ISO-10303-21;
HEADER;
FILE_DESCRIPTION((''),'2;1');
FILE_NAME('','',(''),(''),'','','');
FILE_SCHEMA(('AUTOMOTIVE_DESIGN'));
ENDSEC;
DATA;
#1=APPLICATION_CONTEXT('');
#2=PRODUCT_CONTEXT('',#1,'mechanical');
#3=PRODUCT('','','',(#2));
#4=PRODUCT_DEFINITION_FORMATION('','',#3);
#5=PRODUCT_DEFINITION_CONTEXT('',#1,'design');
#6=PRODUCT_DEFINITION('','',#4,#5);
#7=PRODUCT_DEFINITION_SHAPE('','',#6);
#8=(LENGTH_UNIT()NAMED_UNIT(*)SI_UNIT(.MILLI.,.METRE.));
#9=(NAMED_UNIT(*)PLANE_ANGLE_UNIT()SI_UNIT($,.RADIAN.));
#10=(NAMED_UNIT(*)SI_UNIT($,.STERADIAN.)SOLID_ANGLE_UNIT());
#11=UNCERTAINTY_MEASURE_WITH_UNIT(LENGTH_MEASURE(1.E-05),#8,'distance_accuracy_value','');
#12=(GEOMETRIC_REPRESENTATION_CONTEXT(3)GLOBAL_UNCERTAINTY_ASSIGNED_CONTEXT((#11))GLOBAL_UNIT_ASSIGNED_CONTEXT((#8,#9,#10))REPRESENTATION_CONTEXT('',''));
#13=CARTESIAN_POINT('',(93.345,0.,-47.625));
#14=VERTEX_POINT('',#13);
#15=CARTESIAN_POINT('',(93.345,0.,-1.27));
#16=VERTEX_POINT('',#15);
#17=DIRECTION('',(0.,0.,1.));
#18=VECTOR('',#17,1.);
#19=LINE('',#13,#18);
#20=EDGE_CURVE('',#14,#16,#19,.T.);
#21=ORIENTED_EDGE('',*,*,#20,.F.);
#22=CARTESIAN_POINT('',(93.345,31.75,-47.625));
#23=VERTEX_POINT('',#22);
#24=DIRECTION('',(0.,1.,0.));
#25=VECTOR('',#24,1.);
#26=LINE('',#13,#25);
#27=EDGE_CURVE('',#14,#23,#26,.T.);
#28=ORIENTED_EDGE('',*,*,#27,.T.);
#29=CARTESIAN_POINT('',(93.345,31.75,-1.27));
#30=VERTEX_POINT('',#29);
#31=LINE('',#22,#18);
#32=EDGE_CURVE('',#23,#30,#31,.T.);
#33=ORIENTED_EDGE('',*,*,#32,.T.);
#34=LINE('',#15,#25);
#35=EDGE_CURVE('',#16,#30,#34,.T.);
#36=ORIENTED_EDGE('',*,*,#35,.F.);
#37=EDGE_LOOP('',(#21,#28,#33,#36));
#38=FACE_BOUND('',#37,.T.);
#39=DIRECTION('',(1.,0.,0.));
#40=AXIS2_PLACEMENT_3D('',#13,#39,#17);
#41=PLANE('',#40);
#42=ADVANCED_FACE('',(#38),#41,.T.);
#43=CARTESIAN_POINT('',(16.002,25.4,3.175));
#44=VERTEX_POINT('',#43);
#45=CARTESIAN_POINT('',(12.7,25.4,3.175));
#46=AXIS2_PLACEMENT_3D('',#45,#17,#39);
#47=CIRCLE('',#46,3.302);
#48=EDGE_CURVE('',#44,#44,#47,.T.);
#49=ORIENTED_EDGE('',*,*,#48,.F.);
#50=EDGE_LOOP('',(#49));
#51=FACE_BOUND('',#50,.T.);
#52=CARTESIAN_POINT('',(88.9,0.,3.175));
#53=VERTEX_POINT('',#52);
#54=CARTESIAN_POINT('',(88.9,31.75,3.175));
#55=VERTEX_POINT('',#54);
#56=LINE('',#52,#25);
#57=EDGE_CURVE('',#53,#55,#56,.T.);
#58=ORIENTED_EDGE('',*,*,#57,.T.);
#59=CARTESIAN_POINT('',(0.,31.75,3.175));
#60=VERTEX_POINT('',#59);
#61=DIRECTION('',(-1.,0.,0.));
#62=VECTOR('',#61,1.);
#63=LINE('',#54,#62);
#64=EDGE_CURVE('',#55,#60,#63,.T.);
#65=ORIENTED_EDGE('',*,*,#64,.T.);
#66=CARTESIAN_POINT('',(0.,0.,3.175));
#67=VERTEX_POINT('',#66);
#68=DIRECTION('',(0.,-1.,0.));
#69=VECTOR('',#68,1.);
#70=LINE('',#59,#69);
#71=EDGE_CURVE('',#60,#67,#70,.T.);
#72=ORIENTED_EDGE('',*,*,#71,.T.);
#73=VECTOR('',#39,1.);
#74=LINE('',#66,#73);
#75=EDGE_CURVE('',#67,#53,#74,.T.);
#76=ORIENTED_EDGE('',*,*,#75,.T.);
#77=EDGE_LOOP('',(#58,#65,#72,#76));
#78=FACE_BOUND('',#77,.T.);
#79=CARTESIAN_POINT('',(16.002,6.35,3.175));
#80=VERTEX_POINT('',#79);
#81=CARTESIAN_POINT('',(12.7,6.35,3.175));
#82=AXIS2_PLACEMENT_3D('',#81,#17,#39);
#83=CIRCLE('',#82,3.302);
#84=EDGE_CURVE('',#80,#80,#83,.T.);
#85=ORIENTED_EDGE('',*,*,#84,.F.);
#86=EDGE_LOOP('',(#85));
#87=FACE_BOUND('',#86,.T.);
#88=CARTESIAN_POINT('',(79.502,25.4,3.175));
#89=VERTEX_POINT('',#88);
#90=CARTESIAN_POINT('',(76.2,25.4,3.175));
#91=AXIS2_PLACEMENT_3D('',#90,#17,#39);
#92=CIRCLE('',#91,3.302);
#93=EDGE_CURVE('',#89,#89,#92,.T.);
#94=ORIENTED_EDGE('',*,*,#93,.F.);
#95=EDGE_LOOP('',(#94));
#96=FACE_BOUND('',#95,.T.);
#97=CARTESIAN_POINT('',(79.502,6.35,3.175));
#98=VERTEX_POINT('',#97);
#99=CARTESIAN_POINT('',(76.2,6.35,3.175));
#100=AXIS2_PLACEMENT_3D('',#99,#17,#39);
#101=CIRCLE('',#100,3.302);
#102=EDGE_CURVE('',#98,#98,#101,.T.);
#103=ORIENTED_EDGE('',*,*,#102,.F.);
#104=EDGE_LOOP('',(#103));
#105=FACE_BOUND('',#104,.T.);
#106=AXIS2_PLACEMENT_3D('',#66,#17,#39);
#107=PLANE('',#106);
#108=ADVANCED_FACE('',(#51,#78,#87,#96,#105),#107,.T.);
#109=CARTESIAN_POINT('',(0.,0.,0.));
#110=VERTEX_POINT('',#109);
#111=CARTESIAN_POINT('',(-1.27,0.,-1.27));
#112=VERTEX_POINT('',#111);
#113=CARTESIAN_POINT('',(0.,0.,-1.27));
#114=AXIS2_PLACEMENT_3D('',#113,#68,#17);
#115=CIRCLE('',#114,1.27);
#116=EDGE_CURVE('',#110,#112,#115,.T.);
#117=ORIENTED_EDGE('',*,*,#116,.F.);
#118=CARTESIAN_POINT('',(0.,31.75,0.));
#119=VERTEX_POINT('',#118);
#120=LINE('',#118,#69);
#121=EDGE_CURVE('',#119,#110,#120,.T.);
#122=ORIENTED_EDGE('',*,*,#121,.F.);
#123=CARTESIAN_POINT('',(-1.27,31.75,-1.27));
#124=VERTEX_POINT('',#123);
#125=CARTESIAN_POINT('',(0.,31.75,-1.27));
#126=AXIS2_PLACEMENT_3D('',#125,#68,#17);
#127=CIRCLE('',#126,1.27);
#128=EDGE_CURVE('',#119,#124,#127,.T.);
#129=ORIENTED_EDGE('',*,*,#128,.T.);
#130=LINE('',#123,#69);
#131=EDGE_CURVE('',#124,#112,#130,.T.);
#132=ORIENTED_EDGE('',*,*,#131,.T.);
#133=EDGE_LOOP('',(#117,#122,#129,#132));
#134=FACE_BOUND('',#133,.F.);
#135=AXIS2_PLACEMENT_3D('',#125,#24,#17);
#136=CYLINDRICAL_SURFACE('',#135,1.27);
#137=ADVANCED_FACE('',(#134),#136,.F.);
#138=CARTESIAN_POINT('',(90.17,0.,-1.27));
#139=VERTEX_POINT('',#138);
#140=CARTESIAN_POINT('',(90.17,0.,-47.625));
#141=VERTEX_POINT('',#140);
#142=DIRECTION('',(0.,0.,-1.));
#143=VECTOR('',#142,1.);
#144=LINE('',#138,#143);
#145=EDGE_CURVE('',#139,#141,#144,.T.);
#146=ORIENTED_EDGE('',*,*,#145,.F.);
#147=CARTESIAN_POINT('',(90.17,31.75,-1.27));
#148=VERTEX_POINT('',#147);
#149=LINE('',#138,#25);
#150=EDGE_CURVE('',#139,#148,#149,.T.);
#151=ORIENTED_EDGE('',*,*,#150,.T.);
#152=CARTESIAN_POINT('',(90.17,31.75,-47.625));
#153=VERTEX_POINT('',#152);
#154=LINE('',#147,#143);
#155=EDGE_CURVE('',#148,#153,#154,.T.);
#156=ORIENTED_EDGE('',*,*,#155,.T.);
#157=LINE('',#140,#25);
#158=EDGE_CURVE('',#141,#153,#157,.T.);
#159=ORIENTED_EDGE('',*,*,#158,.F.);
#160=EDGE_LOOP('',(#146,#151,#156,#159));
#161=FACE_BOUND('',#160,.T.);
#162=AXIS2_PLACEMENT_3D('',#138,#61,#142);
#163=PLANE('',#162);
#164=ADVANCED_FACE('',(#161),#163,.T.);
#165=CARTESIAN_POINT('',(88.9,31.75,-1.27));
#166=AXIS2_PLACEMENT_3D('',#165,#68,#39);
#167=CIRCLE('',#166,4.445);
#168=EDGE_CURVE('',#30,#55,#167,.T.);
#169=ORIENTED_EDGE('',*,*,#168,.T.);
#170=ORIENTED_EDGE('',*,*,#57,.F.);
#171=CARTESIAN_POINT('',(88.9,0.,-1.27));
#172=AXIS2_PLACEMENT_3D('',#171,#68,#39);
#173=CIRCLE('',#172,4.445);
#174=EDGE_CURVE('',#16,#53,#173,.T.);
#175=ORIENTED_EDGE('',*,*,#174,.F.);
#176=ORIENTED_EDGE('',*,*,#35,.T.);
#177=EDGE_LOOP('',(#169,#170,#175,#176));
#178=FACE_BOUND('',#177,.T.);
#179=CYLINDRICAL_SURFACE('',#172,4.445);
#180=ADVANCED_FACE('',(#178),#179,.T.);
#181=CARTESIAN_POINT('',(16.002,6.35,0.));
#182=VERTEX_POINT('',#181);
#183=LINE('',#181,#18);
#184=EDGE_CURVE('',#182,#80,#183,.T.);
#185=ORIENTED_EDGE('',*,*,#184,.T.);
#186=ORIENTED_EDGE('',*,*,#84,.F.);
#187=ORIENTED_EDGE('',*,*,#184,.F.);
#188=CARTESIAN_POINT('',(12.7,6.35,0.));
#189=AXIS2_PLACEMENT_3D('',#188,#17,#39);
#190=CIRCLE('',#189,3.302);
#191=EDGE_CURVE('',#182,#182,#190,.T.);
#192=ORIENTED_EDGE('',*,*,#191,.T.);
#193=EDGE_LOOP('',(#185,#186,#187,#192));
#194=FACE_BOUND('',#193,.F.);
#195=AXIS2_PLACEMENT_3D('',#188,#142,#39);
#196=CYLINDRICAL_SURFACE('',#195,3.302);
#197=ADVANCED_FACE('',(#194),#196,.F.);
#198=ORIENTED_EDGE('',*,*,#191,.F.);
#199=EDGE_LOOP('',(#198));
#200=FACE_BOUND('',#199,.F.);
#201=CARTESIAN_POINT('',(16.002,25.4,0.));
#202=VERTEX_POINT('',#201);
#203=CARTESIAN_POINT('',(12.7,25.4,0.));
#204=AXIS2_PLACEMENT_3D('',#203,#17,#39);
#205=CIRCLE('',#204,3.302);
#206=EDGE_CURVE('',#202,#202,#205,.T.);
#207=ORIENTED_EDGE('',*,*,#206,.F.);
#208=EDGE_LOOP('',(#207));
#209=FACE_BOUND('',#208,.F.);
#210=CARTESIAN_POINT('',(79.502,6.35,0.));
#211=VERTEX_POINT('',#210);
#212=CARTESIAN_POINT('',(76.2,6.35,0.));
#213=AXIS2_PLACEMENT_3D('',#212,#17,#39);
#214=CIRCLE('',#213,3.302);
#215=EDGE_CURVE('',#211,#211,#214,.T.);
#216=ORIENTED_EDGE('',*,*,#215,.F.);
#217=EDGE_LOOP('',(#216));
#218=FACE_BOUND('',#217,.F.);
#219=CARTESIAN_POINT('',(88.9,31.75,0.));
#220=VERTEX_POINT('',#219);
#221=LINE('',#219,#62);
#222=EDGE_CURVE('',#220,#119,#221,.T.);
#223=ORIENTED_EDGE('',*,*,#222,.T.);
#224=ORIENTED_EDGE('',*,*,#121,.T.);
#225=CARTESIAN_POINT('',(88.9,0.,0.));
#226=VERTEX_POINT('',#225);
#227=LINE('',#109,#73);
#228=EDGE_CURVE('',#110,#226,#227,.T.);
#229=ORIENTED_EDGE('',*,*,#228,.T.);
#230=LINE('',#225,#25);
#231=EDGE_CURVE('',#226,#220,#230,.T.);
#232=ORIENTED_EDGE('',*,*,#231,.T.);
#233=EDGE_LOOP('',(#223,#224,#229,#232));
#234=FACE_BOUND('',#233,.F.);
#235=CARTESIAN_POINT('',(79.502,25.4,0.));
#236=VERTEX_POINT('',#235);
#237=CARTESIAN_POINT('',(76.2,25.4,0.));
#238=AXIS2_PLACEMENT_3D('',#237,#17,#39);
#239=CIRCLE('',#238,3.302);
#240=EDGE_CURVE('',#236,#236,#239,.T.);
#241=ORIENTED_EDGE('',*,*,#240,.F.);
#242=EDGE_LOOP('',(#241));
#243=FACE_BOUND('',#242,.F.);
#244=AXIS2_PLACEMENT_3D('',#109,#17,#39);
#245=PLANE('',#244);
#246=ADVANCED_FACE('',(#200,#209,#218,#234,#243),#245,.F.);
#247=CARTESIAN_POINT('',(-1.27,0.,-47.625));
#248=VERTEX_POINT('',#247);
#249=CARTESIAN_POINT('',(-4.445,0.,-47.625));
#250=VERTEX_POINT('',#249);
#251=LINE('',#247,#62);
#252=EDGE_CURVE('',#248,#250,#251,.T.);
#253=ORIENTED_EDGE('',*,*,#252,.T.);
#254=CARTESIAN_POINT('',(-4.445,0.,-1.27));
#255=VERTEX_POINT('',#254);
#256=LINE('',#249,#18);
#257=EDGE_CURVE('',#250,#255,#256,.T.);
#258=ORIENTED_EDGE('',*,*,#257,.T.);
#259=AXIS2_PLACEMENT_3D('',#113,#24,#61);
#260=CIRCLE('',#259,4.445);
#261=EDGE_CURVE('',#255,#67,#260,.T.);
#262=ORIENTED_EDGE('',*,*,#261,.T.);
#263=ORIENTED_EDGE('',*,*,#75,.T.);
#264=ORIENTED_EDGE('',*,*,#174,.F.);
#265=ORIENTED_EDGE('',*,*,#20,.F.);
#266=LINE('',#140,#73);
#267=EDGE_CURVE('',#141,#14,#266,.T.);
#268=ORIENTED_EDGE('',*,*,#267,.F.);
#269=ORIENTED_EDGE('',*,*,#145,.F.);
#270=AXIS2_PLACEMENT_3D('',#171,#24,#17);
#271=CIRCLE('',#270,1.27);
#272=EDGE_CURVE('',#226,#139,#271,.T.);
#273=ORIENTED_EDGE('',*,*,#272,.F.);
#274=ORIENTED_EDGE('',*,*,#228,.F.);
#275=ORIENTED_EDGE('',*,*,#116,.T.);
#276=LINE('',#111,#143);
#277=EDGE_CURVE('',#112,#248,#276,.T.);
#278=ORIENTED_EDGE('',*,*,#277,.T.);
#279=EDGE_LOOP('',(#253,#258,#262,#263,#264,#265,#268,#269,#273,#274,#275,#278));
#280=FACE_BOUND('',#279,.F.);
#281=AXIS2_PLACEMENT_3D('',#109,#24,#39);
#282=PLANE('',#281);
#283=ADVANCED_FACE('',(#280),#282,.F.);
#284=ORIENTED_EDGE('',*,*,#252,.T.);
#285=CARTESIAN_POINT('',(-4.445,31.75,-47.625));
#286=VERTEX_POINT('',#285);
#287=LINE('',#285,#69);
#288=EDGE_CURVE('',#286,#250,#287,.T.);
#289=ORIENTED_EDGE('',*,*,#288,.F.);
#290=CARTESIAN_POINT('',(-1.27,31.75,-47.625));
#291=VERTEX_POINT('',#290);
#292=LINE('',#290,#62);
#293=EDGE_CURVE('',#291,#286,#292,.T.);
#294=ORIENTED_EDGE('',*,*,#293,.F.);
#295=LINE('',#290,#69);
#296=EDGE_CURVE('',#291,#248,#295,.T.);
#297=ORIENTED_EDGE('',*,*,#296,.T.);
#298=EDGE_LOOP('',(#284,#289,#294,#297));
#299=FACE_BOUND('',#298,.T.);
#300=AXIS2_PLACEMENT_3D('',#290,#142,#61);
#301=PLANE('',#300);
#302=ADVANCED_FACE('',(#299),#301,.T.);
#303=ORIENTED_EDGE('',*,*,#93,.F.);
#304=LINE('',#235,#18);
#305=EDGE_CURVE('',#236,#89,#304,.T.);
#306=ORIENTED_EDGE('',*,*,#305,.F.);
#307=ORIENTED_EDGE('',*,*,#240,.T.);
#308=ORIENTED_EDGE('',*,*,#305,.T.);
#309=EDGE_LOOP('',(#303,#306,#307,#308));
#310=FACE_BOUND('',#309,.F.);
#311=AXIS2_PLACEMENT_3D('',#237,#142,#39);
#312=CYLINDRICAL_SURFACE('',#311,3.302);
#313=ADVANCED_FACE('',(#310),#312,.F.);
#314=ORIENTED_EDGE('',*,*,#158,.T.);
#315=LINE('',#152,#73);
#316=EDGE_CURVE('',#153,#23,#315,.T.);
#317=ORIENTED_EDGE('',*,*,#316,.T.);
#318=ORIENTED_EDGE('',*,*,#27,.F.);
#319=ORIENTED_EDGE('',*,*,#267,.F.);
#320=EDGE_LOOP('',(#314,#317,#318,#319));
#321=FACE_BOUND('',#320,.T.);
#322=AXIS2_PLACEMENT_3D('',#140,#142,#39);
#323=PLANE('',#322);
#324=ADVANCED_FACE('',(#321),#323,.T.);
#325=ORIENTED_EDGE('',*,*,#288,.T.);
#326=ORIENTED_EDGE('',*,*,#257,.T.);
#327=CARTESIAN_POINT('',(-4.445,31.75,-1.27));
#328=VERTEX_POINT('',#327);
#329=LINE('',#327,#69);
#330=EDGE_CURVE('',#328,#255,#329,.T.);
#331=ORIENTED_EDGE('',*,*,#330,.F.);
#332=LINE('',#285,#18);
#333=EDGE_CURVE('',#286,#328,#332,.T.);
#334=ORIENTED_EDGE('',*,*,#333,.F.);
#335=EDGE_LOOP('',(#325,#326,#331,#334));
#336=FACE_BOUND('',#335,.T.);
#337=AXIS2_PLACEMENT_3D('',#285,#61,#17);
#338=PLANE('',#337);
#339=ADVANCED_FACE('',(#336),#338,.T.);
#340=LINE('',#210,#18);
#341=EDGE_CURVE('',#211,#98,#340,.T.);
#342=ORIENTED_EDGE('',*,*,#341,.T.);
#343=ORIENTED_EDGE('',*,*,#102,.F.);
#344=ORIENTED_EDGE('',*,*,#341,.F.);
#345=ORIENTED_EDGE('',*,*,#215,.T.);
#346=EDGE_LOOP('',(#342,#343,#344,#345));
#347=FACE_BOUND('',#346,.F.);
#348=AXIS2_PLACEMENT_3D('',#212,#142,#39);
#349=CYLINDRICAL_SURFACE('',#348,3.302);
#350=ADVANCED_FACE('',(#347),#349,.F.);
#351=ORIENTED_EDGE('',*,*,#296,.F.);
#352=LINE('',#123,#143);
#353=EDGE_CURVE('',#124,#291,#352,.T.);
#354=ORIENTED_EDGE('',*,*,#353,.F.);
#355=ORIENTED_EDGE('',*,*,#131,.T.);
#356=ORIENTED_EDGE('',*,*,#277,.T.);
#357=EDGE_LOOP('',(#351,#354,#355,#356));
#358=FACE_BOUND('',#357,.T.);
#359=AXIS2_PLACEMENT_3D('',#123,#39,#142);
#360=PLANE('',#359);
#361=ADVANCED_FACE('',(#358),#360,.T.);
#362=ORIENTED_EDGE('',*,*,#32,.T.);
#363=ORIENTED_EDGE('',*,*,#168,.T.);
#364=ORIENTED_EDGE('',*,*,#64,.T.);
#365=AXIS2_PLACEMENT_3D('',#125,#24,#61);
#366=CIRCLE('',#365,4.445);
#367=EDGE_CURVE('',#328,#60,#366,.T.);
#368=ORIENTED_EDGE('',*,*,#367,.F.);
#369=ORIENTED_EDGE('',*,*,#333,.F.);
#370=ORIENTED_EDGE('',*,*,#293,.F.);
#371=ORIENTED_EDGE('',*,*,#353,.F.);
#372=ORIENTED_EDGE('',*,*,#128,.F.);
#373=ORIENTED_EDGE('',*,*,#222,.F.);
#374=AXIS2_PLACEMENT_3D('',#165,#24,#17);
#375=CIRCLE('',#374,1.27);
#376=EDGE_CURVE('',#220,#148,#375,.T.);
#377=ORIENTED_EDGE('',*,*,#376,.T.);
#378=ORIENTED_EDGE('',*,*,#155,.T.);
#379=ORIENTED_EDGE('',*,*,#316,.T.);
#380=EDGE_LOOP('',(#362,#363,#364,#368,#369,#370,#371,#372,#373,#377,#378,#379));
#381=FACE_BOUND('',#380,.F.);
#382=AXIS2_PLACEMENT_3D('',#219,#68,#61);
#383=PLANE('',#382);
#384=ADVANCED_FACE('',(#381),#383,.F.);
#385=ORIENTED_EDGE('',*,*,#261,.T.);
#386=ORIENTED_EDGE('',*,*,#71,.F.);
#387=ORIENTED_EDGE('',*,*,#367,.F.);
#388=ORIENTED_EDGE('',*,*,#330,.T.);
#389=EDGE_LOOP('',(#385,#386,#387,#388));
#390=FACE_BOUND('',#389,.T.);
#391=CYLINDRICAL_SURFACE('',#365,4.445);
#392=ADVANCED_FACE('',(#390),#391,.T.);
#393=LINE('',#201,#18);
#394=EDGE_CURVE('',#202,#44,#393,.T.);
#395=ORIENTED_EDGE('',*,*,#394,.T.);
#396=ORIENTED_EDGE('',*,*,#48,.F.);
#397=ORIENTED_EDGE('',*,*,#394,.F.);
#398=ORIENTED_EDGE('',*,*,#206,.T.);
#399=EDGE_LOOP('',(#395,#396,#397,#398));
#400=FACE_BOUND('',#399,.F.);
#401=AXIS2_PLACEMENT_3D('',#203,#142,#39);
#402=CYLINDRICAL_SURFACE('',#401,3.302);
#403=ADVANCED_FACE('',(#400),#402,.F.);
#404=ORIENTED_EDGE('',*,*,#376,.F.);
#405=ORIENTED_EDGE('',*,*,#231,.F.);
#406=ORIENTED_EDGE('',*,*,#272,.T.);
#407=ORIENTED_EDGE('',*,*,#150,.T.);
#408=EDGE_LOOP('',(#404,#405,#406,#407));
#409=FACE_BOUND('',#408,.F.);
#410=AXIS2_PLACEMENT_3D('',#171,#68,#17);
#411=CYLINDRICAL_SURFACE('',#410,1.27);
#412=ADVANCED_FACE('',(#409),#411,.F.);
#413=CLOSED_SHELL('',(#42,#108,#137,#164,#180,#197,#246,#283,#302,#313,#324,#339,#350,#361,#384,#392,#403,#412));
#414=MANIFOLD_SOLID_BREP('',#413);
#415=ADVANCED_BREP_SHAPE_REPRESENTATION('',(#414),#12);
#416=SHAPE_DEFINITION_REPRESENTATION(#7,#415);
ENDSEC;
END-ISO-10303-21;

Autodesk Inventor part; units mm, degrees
ref_plane "YZ Plane" through (0, 0, 0) normal (1, 0, 0) x (0, 1, 0)
ref_plane "XZ Plane" through (0, 0, 0) normal (0, 1, 0) x (-1, 0, 0)
ref_plane "XY Plane" through (0, 0, 0) normal (0, 0, 1) x (1, 0, 0)
sketch "Sketch1" plane through (0, 0, 0) normal (0, 0, 1) x (1, 0, 0)
  line L0 (0, 0) -> (88.9, 0)
  line L1 (88.9, 0) -> (88.9, 31.75)
  line L2 (88.9, 31.75) -> (0, 31.75)
  line L3 (0, 31.75) -> (0, 0)
  circle A0 centre (12.7, 25.4) radius 3.302
  circle A1 centre (76.2, 25.4) radius 3.302
  circle A2 centre (12.7, 6.35) radius 3.302
  circle A3 centre (76.2, 6.35) radius 3.302
  line L4 (12.7, 25.4) -> (76.2, 25.4) construction
  line L5 (44.45, 31.75) -> (44.45, 0) construction
  point P0 (44.45, 25.4)
  dimension "d0" = 88.9
  dimension "d2" = 31.75
  dimension "d5" = 63.5
  dimension "d8" = 19.05
  dimension "d11" = 6.35
  dimension "d12" = 6.604
extrude "Plate1" add sketch "Sketch1" along normal blind 3.175
sketch "Sketch2" plane through (90.17, 0, -1.27) normal (1, 0, 0) x (0, 1, 0)
  line L0 (31.75, 0) -> (0, 0)
  line L1 (0, 0) -> (0, -46.355)
  line L2 (0, -46.355) -> (31.75, -46.355)
  line L3 (31.75, -46.355) -> (31.75, 0)
edge flange "Flange1" height 50.8 angle 90 thickness 3.175 bend radius 1.27 thickness toward (1, 0, 0) relief straight relief width 3.175 relief depth 1.5875 corner gap 3.175 corner form 0 edges at (88.9, 15.875, 0) (0, 15.875, 0) wall of the first edge with corners at (90.17, 31.75, -1.27) (90.17, 0, -1.27) (90.17, 0, -47.625) (90.17, 31.75, -47.625)
bend "Bend1"
corner "Corner1"
equation "\"d16\" = BendReliefWidth"
equation "\"d17\" = BendReliefDepth"
equation "\"d18\" = MinimumRemnant"
equation "\"d19\" = BendRadius"
equation "\"d23\" = CornerReliefSize"
equation "\"d24\" = GapSize"
equation "\"d25\" = JacobiRadiusSize"
equation "\"BendRadius\" = Thickness"
equation "\"BendReliefWidth\" = Thickness"
equation "\"BendReliefDepth\" = 0.5 * Thickness"
equation "\"CornerReliefSize\" = 4 * Thickness"
equation "\"MinimumRemnant\" = 2 * Thickness"
equation "\"TransitionRadius\" = BendRadius"
equation "\"JacobiRadiusSize\" = Thickness"
equation "\"GapSize\" = Thickness"
equation "\"d15\" = BendRadius"
equation "\"Thickness\" = 3.175"
properties part number "M - Upper Rail Connector Bracket 1" material "Aluminum 6061"
